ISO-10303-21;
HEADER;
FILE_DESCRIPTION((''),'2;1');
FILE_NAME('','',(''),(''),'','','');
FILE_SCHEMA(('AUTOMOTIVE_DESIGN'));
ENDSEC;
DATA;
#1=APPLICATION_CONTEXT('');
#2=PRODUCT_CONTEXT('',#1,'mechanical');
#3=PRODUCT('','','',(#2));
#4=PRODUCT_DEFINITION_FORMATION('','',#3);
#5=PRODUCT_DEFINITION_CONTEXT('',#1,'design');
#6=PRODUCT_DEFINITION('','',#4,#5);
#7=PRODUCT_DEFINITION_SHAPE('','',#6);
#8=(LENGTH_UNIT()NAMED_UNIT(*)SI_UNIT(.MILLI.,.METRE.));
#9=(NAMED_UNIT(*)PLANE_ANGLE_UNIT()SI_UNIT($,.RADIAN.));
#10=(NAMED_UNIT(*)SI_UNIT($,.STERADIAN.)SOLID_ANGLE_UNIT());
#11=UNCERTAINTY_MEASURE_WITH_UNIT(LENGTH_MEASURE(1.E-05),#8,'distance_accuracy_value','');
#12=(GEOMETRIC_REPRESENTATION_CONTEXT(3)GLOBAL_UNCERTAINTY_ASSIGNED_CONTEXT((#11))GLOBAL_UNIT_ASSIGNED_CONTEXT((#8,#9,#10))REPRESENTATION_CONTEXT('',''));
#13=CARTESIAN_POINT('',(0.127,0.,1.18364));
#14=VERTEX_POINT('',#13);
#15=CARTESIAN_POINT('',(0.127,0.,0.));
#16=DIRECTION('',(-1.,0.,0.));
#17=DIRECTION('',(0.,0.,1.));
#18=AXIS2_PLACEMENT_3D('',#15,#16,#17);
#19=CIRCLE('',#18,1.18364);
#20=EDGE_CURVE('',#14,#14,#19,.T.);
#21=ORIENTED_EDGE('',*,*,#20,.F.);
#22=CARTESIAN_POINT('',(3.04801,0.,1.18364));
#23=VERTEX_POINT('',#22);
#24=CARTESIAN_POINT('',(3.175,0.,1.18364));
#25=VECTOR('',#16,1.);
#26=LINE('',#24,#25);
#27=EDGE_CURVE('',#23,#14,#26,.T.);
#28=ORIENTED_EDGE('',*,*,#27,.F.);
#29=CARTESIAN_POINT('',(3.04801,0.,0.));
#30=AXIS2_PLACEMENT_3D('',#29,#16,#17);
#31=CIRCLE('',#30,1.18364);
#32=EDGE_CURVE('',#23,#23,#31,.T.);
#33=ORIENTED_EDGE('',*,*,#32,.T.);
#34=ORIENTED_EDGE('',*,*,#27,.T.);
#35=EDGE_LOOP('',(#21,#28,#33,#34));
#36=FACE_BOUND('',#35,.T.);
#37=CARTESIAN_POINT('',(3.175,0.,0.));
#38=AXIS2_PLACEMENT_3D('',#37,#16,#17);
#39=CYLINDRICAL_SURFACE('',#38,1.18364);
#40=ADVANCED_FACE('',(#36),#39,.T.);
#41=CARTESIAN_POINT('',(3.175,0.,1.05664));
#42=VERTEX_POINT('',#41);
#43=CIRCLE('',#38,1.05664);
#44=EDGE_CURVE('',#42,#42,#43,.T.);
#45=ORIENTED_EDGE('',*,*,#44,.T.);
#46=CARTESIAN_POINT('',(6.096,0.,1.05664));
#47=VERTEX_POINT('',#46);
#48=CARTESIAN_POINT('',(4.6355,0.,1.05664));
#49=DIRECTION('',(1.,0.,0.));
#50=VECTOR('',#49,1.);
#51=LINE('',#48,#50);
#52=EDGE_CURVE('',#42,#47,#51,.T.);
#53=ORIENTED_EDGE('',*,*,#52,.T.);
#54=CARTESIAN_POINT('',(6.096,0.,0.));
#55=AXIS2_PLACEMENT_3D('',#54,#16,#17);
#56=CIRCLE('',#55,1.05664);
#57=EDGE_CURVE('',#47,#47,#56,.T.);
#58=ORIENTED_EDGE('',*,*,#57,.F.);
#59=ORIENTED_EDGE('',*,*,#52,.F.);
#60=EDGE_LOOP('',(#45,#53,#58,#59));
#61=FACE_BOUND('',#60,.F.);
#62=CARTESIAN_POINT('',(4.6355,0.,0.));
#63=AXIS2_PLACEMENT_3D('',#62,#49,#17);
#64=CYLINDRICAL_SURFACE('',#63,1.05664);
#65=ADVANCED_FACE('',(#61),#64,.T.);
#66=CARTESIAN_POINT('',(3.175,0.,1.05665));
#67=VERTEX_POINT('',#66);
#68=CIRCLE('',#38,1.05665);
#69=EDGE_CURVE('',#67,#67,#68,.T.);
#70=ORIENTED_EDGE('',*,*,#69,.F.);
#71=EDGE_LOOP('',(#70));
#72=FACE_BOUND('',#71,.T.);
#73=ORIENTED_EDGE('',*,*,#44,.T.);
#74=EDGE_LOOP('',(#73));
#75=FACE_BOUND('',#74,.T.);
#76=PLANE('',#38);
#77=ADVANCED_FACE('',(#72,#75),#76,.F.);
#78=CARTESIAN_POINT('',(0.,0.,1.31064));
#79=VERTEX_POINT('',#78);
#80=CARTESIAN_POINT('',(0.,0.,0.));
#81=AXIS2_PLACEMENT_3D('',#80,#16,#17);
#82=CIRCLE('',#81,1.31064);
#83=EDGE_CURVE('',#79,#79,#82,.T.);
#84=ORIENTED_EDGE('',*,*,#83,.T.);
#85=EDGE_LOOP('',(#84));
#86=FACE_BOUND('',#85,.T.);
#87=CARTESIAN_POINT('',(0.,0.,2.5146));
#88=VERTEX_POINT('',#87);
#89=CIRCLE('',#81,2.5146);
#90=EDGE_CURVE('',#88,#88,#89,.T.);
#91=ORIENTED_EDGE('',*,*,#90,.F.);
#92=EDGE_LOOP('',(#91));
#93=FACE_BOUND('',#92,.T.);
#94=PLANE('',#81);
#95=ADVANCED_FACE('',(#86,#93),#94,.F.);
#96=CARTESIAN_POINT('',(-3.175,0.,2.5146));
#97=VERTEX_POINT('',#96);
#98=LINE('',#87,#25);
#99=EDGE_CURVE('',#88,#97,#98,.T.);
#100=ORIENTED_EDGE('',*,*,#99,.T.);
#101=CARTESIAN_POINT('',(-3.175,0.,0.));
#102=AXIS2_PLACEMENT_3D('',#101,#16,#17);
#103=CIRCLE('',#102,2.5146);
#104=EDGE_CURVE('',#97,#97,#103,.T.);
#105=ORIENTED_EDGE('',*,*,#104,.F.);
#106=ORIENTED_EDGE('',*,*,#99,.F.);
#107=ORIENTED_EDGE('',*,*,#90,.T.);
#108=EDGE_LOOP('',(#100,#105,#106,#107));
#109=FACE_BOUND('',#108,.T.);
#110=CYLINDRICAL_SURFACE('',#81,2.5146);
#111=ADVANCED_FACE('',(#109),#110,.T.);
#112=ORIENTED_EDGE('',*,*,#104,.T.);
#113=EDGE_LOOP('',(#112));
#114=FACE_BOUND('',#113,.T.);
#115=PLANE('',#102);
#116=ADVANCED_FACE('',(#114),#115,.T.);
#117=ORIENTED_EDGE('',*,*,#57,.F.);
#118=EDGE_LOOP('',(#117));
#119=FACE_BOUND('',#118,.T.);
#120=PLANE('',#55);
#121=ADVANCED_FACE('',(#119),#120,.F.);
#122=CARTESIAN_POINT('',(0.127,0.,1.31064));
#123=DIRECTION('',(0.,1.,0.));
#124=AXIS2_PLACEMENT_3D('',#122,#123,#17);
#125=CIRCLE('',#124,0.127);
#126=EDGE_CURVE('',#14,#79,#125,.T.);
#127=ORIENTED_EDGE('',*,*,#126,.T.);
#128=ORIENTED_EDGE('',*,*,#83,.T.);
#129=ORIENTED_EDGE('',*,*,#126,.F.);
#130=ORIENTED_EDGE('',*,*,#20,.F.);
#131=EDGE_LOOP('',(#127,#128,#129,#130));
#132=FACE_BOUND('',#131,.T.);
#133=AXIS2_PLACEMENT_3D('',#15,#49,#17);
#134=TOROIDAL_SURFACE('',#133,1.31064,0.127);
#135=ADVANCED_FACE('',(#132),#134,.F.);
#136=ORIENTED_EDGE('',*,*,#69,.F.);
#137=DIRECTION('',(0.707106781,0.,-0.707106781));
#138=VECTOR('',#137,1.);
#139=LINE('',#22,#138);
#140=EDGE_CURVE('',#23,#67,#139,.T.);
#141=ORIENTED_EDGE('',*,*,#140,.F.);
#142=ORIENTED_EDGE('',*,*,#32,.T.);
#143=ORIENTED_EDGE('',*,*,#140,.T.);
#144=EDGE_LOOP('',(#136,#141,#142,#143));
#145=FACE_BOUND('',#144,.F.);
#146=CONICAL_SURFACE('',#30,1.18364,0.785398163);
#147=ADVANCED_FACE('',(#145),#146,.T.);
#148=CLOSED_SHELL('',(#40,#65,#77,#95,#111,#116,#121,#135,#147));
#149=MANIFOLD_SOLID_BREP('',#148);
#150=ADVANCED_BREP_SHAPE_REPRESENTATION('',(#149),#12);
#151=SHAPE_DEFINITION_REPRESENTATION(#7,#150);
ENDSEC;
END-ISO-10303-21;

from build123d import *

# Parameters (mm, degrees)
F0_W     = 2.921
F0_H     = 1.05664
F2_R     = 0.127
F3_SIZE2 = 0.12699
F3_SIZE  = 0.12699


# Not quite as in the source:
# - a fillet or chamfer is up to 0.001 mm smaller than in the source, because OpenCascade refuses the exact size


with BuildPart() as f1:
    # F0 (on Front) → F1 (revolve)
    with BuildSketch(Plane.XZ):
        Polygon((-3.175, 0), (0, 0), (0, 1.18364), (0, 2.5146), (-3.175, 2.5146), align=None)
        Polygon((0, 1.18364), (0, 0), (3.175, 0), (3.175, 1.05664), (3.175, 1.18364), align=None)
        with Locations((4.6355, 0.52832)):
            Rectangle(F0_W, F0_H)
    revolve(axis=Axis((-1.5875, 0, 0), (-1, 0, 0)))

    # F2
    f2_edges = [f1.edges().sort_by_distance(p)[0] for p in [
        (0, 0, -1.18364),
    ]]
    fillet(f2_edges, radius=F2_R)

    # F3 (size 0.127 and 0.127 in the source; OpenCascade refuses exactly that, so slightly less here)
    f3_edges = [f1.edges().sort_by_distance(p)[0] for p in [
        (3.175, 0, -1.18364),
    ]]
    chamfer(f3_edges, length=F3_SIZE, length2=F3_SIZE2)


solid = f1.part
